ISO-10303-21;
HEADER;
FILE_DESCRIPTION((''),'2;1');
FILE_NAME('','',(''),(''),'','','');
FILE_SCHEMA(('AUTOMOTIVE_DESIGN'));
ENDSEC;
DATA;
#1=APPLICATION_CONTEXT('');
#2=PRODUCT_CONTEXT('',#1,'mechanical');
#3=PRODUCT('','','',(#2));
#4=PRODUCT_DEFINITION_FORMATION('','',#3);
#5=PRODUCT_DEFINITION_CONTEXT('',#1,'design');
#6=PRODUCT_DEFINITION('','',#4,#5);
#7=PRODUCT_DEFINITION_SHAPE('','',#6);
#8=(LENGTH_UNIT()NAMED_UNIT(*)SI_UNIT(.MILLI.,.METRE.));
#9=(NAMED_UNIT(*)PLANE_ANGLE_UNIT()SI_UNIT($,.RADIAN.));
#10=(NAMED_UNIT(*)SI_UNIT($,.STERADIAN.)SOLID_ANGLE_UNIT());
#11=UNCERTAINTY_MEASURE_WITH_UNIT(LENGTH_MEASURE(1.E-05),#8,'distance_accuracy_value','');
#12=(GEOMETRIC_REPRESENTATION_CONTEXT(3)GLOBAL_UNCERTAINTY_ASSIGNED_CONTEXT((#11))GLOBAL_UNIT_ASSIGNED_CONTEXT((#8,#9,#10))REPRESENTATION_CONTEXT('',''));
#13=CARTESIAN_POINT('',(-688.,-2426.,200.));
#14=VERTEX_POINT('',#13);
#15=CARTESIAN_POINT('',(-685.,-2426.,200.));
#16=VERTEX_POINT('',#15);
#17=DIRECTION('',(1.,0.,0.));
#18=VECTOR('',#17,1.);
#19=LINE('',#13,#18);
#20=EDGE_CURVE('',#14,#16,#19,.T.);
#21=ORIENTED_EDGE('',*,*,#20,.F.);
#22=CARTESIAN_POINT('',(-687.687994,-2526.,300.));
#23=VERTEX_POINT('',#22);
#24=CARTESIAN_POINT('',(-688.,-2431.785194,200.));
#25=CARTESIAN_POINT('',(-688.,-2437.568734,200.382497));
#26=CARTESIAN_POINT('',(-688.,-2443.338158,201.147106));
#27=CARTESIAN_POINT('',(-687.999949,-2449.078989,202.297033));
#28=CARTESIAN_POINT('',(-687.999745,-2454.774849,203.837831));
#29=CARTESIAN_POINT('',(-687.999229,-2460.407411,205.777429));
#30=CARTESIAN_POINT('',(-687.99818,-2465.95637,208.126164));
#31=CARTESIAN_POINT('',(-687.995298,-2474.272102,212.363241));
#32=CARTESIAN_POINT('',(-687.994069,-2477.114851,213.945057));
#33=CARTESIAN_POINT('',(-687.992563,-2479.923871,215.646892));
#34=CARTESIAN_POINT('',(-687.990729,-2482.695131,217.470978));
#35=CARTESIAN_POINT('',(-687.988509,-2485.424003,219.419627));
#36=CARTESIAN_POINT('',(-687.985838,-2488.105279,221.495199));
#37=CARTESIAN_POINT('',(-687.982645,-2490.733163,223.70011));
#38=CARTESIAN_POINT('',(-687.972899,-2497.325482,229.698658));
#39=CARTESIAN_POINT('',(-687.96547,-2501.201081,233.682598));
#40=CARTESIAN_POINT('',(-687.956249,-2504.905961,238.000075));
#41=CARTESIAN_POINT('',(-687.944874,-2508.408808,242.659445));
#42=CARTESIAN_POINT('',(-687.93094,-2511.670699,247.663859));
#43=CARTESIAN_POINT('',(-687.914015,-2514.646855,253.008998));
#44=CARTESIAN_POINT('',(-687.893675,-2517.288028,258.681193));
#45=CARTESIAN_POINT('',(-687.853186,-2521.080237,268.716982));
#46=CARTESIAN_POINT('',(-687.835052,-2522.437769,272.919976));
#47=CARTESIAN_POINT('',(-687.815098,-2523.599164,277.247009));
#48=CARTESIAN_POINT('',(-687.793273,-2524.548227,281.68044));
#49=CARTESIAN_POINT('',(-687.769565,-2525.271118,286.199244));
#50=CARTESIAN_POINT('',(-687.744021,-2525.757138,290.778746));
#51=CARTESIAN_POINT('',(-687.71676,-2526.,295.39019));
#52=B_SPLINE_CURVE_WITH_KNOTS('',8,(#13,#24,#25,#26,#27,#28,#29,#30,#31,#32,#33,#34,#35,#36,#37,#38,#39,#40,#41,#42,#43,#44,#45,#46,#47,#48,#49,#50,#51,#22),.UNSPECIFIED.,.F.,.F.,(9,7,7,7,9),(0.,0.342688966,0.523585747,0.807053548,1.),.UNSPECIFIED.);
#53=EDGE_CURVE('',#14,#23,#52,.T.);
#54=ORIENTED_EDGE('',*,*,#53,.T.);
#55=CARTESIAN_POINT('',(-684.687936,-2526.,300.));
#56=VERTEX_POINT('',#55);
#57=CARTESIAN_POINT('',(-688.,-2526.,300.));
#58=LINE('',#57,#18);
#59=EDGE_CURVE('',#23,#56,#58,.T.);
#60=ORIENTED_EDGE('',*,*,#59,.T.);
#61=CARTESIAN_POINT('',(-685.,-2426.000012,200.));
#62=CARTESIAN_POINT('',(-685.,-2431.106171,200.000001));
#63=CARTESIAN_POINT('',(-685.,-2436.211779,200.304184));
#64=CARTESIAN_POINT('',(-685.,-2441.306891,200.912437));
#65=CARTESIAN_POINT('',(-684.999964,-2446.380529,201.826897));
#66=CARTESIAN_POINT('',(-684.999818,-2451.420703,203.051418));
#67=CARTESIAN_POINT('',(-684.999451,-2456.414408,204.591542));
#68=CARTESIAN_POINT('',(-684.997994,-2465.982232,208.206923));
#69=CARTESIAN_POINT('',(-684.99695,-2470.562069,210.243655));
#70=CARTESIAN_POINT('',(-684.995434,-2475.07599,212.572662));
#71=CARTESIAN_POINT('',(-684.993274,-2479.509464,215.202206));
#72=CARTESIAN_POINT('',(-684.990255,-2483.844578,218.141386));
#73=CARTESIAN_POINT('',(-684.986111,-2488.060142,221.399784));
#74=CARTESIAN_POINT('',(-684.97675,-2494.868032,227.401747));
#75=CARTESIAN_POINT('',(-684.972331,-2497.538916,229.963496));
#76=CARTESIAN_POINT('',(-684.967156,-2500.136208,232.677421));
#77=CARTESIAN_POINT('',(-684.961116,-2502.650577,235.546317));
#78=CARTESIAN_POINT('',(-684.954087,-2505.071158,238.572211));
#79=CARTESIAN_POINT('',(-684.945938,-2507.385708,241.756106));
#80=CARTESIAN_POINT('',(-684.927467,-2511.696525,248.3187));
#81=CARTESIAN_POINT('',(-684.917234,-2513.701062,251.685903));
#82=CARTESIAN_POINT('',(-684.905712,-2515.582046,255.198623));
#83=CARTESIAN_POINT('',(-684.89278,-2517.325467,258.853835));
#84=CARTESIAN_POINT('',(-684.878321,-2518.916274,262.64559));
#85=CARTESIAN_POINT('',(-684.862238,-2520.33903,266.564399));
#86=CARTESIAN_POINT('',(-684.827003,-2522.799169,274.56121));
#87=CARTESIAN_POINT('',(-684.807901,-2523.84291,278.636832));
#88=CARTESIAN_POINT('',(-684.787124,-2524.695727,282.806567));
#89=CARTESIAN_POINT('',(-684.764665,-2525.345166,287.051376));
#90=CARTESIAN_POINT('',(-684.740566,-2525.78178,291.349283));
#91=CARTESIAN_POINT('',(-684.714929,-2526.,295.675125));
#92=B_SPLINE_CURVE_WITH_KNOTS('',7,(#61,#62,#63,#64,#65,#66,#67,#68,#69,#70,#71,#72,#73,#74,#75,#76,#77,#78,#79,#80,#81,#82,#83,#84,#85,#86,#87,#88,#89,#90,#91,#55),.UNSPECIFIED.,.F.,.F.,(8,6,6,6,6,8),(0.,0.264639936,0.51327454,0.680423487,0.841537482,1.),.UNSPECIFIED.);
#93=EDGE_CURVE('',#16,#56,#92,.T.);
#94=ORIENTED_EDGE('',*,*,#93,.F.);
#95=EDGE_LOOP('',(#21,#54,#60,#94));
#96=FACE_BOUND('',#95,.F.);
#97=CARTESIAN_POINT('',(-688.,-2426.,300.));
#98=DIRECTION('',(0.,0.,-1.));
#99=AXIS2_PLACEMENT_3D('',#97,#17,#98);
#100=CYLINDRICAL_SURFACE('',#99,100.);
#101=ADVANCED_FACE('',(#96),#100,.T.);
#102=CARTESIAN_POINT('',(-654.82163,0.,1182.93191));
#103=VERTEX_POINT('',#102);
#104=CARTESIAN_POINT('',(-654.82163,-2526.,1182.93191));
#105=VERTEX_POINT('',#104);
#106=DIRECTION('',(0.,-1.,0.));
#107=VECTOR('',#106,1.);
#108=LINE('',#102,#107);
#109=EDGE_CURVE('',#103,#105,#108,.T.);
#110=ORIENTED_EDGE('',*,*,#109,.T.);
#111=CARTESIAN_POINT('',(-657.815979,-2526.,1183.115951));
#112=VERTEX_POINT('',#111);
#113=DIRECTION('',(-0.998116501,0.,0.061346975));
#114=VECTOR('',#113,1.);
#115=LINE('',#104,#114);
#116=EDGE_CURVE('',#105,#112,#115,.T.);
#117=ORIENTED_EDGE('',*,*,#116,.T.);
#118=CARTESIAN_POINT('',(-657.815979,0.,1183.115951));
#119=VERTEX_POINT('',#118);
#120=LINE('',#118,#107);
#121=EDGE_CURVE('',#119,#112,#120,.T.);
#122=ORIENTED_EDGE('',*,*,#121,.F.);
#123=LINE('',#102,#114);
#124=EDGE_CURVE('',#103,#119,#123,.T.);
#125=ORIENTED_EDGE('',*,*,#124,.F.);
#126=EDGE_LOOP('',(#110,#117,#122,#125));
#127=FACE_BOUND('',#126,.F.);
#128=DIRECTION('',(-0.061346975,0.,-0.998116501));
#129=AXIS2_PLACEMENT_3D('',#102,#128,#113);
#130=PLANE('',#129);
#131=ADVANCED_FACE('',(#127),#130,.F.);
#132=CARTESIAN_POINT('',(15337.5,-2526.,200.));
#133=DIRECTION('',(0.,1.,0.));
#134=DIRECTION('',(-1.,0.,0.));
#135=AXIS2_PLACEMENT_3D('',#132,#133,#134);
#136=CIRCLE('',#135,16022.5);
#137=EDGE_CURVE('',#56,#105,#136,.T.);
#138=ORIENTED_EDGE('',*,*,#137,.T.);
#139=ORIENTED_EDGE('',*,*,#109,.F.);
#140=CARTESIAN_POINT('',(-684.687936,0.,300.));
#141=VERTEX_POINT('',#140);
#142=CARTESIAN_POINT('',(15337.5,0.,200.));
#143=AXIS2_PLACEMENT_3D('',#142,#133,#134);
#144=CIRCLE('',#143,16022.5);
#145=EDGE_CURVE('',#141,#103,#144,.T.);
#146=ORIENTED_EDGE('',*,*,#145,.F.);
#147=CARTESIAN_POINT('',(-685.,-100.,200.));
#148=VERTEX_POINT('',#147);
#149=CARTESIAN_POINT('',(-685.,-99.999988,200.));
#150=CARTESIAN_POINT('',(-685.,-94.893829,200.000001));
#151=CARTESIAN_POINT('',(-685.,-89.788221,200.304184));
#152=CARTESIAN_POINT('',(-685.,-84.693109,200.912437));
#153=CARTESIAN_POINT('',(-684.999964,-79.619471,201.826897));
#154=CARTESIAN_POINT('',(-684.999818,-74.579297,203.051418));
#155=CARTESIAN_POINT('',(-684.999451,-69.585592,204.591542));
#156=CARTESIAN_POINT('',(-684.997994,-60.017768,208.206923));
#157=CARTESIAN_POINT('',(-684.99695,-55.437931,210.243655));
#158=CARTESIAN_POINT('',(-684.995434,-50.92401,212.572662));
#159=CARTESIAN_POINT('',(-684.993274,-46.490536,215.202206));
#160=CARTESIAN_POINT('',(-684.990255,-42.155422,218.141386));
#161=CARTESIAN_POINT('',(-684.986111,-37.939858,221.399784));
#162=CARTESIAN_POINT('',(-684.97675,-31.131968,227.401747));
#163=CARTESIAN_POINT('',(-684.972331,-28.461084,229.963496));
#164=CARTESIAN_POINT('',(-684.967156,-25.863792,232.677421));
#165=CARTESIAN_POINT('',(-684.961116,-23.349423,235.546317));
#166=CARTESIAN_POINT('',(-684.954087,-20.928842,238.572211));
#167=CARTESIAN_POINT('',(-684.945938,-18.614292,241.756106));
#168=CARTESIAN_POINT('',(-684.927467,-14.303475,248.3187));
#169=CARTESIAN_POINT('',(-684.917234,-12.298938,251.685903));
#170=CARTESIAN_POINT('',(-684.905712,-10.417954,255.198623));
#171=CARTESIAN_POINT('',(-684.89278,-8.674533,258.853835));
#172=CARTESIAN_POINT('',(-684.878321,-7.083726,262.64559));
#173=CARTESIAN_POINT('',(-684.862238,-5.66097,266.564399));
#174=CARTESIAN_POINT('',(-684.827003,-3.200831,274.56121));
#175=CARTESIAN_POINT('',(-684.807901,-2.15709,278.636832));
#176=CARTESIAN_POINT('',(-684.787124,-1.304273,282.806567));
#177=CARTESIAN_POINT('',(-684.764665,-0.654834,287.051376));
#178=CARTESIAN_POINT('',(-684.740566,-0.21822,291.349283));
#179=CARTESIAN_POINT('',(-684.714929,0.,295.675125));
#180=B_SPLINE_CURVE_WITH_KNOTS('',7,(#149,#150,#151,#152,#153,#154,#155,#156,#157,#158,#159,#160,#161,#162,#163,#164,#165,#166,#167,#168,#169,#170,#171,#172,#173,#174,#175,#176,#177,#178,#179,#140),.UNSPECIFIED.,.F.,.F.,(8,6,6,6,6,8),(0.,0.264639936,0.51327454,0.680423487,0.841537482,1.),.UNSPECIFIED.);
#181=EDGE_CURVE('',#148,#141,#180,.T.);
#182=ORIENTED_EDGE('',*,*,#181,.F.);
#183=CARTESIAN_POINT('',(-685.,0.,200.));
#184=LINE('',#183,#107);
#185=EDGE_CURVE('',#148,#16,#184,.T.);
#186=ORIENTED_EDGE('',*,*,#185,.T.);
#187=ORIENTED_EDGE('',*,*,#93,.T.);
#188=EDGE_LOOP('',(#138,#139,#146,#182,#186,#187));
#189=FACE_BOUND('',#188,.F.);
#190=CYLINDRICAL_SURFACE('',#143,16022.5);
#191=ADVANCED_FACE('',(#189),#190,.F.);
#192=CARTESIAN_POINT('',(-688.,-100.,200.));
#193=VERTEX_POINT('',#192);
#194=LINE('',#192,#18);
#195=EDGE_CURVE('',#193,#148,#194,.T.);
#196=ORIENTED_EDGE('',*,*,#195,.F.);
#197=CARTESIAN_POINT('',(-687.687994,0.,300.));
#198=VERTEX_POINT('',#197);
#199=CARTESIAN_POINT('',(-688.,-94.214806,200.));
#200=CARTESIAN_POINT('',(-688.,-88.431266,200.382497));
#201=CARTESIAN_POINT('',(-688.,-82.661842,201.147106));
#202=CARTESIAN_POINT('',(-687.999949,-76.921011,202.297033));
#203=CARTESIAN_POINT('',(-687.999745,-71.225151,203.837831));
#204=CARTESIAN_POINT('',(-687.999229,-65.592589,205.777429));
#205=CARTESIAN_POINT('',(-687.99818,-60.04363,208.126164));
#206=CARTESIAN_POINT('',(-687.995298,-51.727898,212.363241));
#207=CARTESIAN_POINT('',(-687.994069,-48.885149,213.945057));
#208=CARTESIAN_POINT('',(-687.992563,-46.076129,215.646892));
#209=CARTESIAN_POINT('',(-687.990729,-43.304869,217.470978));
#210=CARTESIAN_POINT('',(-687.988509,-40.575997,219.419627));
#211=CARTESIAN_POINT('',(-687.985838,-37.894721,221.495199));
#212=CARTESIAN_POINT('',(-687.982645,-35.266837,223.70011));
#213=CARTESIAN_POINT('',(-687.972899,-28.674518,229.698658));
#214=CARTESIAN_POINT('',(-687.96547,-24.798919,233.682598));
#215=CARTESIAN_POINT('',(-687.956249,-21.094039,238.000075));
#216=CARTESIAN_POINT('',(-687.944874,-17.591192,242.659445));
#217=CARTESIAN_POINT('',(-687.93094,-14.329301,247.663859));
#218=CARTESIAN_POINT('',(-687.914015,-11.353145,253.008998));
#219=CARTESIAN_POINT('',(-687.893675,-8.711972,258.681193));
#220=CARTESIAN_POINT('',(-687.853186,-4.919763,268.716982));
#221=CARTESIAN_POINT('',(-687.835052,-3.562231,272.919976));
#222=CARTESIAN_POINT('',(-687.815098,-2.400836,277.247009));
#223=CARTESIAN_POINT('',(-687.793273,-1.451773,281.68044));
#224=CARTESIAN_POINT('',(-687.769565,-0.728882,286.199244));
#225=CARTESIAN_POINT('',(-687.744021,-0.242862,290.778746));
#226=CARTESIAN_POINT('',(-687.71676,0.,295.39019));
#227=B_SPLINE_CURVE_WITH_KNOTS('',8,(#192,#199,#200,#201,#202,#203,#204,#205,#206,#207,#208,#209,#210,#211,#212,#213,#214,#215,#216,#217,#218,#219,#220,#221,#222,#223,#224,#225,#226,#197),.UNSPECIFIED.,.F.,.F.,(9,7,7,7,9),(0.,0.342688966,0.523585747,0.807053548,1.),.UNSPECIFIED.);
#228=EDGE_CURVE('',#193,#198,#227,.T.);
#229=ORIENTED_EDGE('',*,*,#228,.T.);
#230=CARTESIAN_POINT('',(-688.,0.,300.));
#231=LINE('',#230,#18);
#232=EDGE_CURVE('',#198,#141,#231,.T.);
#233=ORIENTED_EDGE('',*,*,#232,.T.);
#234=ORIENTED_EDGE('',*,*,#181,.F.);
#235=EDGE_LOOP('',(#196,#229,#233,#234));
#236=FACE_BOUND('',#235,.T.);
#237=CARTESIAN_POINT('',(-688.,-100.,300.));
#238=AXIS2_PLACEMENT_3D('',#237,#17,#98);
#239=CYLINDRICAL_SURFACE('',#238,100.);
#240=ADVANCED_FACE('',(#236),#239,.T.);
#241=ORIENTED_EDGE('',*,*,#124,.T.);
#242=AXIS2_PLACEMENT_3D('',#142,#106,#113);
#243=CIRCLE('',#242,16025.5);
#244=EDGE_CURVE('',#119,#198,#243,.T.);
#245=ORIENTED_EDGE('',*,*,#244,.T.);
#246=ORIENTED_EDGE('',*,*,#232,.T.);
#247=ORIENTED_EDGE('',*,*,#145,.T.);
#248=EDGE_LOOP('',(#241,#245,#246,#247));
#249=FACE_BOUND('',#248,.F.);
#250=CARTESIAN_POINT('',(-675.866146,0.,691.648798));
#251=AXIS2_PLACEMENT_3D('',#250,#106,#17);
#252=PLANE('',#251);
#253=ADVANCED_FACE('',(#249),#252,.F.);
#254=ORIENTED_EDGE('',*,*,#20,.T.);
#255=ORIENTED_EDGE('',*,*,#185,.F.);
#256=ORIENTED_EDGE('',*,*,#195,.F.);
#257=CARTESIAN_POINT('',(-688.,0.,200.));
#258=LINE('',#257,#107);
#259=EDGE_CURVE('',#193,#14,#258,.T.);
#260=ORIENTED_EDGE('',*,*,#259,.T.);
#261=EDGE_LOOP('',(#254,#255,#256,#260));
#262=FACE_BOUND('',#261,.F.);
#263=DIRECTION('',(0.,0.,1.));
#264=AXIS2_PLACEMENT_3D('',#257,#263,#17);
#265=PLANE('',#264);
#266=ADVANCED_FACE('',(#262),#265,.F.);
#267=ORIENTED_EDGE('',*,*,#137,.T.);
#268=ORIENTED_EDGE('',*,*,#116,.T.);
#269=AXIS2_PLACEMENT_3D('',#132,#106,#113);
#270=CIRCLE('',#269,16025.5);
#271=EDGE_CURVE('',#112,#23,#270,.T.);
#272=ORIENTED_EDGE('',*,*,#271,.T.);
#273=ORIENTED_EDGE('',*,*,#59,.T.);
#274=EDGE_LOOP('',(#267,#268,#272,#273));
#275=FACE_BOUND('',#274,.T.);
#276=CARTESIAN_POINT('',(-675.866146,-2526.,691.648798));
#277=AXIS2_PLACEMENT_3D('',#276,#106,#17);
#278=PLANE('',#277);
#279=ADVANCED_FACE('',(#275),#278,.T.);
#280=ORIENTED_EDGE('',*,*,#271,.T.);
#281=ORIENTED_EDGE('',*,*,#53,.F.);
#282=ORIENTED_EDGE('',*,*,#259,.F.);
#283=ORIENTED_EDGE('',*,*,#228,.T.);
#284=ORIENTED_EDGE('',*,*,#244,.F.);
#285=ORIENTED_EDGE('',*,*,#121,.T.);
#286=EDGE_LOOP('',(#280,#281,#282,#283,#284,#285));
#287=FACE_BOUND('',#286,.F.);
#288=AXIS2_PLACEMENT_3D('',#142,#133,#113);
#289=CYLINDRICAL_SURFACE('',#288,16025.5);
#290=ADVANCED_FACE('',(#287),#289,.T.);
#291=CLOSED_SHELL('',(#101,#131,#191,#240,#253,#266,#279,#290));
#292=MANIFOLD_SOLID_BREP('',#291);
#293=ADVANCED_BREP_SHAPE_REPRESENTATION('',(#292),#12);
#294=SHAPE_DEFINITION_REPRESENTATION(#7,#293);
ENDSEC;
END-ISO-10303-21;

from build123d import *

# Parameters (mm, degrees)
F1_DEPTH = 2526
F2_R     = 100


with BuildPart() as f1:
    # F0 (on Front) → F1 (new body)
    with BuildSketch(Plane.XZ):
        with BuildLine():
            ThreePointArc((-685, 200), (-677.4536303253, 691.6975376497), (-654.8216297668, 1182.9319102019))
            Line((-654.8216297668, 1182.9319102019), (-657.8159792684, 1183.1159511275))
            ThreePointArc((-657.8159792684, 1183.1159511275), (-680.4522173679, 691.7896014733), (-688, 200))
            Line((-688, 200), (-685, 200))
        make_face()
    extrude(amount=F1_DEPTH)

    # F2
    f2_edges = [f1.edges().sort_by_distance(p)[0] for p in [
        (-686.5, -2526, 200),
        (-686.5, 0, 200),
    ]]
    fillet(f2_edges, radius=F2_R)


solid = f1.part
